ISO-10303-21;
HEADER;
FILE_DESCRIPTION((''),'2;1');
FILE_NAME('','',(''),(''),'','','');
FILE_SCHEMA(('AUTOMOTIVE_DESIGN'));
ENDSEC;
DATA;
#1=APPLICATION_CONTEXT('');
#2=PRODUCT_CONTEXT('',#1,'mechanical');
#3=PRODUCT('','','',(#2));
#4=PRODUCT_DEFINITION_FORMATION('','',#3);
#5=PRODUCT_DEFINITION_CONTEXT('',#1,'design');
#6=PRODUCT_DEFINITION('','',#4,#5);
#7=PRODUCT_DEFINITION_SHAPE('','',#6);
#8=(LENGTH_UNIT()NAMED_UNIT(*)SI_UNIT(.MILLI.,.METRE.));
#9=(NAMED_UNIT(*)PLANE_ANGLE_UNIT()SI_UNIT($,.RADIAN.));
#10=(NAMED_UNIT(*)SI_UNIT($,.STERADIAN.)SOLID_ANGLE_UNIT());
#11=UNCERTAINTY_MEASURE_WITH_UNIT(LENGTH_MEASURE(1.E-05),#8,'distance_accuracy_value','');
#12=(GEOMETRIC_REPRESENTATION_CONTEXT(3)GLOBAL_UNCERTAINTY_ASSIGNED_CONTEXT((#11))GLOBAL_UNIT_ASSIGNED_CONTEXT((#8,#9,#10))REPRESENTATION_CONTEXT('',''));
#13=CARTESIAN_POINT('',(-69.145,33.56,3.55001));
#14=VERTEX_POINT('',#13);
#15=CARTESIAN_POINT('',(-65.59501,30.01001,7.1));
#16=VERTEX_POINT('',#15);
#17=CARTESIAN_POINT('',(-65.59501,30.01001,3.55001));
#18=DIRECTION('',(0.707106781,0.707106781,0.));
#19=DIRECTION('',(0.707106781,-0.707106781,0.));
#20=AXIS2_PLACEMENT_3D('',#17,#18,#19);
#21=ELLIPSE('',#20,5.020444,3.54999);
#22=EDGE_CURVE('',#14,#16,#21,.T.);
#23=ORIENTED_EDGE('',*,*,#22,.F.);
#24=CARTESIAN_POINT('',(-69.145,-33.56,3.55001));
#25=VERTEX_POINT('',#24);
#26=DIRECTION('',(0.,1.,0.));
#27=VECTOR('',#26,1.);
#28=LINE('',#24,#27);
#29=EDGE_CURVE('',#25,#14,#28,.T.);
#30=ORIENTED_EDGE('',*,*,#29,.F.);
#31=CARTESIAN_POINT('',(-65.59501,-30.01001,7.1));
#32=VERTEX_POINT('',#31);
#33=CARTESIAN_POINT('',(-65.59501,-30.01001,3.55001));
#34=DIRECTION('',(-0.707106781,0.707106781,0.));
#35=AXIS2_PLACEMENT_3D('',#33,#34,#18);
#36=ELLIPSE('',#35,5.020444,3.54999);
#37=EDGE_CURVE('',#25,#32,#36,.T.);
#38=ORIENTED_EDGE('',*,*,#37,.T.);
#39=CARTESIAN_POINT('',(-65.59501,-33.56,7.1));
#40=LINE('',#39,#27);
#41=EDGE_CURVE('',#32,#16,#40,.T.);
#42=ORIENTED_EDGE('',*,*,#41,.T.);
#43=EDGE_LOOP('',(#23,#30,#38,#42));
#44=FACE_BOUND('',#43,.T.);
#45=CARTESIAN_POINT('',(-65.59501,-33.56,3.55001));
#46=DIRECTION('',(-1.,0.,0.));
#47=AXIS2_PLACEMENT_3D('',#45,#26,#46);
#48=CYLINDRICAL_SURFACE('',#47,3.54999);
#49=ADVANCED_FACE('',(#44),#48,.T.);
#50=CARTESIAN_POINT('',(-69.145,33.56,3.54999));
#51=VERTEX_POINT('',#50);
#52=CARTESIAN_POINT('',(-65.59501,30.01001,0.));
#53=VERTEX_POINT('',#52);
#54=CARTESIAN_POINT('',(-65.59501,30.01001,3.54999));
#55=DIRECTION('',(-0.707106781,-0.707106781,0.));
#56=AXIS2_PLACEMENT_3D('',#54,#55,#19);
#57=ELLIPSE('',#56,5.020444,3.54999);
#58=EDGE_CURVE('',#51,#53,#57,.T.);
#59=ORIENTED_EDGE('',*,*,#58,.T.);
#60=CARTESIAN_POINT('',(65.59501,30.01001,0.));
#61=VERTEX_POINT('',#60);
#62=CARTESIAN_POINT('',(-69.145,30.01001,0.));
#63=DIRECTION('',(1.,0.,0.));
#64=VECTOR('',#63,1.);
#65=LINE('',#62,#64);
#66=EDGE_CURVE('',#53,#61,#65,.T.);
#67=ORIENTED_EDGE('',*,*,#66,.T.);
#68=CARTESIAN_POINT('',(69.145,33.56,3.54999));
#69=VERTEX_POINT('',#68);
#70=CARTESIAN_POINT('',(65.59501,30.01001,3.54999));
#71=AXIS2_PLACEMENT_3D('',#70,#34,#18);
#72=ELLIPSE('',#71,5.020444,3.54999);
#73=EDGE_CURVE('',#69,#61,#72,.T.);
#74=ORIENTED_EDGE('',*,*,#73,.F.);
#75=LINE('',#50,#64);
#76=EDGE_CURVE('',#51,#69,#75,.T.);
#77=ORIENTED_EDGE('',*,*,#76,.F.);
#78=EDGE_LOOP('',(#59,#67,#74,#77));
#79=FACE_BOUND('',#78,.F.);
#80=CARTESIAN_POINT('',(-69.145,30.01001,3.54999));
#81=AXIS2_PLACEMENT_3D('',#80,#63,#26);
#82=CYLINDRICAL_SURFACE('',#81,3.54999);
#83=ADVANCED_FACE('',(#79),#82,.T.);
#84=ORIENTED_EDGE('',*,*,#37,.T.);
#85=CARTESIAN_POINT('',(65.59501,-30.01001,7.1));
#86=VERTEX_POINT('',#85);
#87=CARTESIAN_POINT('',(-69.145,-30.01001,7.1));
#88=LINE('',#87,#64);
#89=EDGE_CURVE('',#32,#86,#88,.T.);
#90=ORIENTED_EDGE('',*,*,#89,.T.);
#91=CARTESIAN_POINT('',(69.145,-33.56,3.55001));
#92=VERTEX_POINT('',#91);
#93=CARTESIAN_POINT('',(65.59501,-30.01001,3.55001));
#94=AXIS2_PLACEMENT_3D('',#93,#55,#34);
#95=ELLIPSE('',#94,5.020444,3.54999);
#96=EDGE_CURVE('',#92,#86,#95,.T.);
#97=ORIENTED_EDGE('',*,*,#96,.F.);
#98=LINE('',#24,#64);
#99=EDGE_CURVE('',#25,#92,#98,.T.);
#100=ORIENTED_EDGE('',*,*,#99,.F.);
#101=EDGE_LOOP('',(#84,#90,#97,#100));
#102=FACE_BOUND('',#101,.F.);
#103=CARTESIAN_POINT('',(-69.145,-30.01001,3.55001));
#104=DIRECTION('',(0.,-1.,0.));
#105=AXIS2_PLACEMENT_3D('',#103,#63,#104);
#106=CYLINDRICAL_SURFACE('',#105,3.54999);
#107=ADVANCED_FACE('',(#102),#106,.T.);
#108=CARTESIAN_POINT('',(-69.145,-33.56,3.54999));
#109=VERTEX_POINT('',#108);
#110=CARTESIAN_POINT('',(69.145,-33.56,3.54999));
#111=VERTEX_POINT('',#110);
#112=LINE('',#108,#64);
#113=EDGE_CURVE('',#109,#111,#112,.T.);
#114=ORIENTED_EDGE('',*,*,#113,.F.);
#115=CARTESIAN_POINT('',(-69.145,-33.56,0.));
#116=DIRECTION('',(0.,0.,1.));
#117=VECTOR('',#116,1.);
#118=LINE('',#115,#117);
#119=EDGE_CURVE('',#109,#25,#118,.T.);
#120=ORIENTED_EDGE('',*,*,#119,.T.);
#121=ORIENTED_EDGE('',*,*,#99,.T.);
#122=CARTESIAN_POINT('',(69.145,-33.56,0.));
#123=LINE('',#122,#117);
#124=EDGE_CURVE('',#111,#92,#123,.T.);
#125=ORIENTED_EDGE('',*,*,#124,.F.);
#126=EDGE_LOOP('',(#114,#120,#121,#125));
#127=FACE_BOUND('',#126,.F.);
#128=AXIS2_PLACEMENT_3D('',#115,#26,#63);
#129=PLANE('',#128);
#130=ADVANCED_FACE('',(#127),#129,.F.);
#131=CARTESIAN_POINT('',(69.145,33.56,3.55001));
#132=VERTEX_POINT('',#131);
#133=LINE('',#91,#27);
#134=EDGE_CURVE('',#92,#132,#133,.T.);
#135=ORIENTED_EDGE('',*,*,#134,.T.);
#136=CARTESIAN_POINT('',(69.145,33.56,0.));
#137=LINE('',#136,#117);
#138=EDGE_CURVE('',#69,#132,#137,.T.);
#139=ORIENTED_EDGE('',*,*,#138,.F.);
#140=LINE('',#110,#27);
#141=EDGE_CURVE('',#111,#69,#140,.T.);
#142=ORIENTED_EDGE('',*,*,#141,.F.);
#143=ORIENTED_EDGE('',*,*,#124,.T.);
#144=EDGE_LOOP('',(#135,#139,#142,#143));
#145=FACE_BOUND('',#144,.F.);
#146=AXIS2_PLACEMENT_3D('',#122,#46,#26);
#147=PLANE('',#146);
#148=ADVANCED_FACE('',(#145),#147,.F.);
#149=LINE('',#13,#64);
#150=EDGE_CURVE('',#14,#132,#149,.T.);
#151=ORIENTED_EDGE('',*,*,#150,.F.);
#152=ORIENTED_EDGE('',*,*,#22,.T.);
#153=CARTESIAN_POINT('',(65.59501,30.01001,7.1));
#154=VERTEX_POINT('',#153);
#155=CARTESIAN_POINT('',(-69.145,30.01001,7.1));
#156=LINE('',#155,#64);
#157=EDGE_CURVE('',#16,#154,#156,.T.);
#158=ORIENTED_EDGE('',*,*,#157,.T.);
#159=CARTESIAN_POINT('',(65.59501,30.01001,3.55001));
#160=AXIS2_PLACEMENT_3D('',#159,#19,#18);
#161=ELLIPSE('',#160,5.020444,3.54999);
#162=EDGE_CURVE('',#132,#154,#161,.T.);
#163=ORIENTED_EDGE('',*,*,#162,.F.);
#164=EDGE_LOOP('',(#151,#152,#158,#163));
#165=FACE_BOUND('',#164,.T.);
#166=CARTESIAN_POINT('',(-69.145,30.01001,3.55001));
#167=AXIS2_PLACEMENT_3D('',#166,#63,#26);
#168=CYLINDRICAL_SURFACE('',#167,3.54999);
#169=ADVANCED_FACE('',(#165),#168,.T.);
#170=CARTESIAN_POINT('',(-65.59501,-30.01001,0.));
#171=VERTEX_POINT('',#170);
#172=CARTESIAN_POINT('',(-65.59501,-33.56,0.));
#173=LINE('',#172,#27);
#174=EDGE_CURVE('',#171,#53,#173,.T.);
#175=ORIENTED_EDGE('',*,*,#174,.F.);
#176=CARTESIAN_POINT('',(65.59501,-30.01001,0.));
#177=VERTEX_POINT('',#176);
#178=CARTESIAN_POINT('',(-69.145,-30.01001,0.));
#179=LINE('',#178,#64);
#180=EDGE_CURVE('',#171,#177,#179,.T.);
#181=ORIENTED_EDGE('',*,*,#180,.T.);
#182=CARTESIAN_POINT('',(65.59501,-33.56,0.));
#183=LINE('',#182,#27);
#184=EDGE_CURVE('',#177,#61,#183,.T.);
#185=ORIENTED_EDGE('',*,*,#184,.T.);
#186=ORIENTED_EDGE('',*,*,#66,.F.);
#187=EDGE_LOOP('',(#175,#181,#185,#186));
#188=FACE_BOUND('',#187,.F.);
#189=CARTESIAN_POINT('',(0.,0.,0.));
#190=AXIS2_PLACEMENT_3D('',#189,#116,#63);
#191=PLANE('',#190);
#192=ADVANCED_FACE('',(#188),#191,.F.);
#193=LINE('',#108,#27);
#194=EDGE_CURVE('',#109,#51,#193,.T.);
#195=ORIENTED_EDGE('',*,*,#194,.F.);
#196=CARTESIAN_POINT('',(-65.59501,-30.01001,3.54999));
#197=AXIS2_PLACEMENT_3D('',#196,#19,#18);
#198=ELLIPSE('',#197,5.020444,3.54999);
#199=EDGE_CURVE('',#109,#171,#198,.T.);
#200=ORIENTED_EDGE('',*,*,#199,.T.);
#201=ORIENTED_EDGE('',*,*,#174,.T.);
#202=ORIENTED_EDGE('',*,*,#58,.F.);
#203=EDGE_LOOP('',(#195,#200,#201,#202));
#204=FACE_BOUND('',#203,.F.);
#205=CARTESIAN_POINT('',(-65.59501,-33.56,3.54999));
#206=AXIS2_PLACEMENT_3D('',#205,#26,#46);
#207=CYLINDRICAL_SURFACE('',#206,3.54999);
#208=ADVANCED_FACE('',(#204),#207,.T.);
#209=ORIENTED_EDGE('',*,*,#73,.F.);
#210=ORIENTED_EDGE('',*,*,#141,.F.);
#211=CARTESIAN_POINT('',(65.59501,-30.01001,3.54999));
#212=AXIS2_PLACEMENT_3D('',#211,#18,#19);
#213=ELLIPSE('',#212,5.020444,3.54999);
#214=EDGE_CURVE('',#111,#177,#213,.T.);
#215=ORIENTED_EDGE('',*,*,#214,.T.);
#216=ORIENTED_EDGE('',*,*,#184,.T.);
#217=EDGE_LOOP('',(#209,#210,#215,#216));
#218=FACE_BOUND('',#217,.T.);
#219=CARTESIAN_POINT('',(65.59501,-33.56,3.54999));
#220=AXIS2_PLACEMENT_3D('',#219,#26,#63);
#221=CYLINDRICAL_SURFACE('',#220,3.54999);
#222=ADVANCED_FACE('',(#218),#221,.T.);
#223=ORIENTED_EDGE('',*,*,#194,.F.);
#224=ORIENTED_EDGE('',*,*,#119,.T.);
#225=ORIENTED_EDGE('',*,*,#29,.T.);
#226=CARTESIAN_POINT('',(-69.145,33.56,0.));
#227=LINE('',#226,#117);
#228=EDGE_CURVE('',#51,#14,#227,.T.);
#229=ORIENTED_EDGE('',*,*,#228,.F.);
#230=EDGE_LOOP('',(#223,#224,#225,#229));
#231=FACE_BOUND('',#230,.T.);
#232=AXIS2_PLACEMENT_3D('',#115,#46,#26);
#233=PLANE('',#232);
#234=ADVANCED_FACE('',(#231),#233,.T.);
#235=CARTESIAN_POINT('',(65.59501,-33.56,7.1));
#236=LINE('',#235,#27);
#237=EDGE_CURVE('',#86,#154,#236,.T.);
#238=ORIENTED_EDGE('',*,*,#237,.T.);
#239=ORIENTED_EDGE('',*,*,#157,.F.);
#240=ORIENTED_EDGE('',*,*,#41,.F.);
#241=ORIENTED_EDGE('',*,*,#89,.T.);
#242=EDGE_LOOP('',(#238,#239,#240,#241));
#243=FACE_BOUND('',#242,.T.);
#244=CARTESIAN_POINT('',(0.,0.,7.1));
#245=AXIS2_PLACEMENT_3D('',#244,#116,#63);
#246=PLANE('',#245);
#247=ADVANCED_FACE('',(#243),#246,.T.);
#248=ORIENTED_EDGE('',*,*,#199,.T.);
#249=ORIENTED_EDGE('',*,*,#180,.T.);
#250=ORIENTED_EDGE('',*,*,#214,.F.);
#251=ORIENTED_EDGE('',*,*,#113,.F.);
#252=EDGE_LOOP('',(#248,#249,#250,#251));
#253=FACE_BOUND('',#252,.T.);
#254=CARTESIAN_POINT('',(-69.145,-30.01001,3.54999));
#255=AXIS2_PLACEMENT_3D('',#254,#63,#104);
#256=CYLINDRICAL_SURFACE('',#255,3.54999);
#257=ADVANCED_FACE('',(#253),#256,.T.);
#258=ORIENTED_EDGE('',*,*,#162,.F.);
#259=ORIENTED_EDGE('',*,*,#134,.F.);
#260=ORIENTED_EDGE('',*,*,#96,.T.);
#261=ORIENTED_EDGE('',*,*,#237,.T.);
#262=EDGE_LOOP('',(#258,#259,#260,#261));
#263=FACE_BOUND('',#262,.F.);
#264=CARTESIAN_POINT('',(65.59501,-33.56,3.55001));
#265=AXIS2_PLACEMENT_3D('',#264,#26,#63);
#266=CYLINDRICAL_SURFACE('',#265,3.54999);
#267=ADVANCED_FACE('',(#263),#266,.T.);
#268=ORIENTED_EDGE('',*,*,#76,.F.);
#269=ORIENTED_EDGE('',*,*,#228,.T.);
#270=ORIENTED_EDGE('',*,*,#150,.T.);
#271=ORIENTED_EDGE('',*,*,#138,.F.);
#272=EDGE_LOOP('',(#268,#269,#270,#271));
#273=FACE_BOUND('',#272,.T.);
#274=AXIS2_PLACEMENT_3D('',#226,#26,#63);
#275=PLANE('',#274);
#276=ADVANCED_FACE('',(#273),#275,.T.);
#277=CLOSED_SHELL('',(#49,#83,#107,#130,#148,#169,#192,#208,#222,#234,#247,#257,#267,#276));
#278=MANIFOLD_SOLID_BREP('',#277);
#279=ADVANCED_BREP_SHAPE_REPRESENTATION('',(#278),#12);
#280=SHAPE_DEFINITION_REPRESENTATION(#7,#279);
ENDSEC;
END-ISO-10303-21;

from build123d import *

# Parameters (mm, degrees)
F0_W     = 138.29
F0_H     = 67.12
F1_DEPTH = 7.1
F2_R     = 3.54999


# Not quite as in the source:
# - a fillet or chamfer is up to 0.001 mm smaller than in the source, because OpenCascade refuses the exact size


with BuildPart() as f1:
    # F0 (on Top) → F1 (new body)
    with BuildSketch(Plane.XY):
        Rectangle(F0_W, F0_H)
    extrude(amount=F1_DEPTH)

    # F2 (radius 3.55 in the source; OpenCascade refuses exactly that, so slightly less here)
    f2_edges = [f1.edges().sort_by_distance(p)[0] for p in [
        (0, -33.56, 0),
        (69.145, 0, 7.1),
        (69.145, 0, 0),
        (0, 33.56, 7.1),
        (0, 33.56, 0),
        (-69.145, 0, 7.1),
        (-69.145, 0, 0),
        (0, -33.56, 7.1),
    ]]
    fillet(f2_edges, radius=F2_R)


solid = f1.part
